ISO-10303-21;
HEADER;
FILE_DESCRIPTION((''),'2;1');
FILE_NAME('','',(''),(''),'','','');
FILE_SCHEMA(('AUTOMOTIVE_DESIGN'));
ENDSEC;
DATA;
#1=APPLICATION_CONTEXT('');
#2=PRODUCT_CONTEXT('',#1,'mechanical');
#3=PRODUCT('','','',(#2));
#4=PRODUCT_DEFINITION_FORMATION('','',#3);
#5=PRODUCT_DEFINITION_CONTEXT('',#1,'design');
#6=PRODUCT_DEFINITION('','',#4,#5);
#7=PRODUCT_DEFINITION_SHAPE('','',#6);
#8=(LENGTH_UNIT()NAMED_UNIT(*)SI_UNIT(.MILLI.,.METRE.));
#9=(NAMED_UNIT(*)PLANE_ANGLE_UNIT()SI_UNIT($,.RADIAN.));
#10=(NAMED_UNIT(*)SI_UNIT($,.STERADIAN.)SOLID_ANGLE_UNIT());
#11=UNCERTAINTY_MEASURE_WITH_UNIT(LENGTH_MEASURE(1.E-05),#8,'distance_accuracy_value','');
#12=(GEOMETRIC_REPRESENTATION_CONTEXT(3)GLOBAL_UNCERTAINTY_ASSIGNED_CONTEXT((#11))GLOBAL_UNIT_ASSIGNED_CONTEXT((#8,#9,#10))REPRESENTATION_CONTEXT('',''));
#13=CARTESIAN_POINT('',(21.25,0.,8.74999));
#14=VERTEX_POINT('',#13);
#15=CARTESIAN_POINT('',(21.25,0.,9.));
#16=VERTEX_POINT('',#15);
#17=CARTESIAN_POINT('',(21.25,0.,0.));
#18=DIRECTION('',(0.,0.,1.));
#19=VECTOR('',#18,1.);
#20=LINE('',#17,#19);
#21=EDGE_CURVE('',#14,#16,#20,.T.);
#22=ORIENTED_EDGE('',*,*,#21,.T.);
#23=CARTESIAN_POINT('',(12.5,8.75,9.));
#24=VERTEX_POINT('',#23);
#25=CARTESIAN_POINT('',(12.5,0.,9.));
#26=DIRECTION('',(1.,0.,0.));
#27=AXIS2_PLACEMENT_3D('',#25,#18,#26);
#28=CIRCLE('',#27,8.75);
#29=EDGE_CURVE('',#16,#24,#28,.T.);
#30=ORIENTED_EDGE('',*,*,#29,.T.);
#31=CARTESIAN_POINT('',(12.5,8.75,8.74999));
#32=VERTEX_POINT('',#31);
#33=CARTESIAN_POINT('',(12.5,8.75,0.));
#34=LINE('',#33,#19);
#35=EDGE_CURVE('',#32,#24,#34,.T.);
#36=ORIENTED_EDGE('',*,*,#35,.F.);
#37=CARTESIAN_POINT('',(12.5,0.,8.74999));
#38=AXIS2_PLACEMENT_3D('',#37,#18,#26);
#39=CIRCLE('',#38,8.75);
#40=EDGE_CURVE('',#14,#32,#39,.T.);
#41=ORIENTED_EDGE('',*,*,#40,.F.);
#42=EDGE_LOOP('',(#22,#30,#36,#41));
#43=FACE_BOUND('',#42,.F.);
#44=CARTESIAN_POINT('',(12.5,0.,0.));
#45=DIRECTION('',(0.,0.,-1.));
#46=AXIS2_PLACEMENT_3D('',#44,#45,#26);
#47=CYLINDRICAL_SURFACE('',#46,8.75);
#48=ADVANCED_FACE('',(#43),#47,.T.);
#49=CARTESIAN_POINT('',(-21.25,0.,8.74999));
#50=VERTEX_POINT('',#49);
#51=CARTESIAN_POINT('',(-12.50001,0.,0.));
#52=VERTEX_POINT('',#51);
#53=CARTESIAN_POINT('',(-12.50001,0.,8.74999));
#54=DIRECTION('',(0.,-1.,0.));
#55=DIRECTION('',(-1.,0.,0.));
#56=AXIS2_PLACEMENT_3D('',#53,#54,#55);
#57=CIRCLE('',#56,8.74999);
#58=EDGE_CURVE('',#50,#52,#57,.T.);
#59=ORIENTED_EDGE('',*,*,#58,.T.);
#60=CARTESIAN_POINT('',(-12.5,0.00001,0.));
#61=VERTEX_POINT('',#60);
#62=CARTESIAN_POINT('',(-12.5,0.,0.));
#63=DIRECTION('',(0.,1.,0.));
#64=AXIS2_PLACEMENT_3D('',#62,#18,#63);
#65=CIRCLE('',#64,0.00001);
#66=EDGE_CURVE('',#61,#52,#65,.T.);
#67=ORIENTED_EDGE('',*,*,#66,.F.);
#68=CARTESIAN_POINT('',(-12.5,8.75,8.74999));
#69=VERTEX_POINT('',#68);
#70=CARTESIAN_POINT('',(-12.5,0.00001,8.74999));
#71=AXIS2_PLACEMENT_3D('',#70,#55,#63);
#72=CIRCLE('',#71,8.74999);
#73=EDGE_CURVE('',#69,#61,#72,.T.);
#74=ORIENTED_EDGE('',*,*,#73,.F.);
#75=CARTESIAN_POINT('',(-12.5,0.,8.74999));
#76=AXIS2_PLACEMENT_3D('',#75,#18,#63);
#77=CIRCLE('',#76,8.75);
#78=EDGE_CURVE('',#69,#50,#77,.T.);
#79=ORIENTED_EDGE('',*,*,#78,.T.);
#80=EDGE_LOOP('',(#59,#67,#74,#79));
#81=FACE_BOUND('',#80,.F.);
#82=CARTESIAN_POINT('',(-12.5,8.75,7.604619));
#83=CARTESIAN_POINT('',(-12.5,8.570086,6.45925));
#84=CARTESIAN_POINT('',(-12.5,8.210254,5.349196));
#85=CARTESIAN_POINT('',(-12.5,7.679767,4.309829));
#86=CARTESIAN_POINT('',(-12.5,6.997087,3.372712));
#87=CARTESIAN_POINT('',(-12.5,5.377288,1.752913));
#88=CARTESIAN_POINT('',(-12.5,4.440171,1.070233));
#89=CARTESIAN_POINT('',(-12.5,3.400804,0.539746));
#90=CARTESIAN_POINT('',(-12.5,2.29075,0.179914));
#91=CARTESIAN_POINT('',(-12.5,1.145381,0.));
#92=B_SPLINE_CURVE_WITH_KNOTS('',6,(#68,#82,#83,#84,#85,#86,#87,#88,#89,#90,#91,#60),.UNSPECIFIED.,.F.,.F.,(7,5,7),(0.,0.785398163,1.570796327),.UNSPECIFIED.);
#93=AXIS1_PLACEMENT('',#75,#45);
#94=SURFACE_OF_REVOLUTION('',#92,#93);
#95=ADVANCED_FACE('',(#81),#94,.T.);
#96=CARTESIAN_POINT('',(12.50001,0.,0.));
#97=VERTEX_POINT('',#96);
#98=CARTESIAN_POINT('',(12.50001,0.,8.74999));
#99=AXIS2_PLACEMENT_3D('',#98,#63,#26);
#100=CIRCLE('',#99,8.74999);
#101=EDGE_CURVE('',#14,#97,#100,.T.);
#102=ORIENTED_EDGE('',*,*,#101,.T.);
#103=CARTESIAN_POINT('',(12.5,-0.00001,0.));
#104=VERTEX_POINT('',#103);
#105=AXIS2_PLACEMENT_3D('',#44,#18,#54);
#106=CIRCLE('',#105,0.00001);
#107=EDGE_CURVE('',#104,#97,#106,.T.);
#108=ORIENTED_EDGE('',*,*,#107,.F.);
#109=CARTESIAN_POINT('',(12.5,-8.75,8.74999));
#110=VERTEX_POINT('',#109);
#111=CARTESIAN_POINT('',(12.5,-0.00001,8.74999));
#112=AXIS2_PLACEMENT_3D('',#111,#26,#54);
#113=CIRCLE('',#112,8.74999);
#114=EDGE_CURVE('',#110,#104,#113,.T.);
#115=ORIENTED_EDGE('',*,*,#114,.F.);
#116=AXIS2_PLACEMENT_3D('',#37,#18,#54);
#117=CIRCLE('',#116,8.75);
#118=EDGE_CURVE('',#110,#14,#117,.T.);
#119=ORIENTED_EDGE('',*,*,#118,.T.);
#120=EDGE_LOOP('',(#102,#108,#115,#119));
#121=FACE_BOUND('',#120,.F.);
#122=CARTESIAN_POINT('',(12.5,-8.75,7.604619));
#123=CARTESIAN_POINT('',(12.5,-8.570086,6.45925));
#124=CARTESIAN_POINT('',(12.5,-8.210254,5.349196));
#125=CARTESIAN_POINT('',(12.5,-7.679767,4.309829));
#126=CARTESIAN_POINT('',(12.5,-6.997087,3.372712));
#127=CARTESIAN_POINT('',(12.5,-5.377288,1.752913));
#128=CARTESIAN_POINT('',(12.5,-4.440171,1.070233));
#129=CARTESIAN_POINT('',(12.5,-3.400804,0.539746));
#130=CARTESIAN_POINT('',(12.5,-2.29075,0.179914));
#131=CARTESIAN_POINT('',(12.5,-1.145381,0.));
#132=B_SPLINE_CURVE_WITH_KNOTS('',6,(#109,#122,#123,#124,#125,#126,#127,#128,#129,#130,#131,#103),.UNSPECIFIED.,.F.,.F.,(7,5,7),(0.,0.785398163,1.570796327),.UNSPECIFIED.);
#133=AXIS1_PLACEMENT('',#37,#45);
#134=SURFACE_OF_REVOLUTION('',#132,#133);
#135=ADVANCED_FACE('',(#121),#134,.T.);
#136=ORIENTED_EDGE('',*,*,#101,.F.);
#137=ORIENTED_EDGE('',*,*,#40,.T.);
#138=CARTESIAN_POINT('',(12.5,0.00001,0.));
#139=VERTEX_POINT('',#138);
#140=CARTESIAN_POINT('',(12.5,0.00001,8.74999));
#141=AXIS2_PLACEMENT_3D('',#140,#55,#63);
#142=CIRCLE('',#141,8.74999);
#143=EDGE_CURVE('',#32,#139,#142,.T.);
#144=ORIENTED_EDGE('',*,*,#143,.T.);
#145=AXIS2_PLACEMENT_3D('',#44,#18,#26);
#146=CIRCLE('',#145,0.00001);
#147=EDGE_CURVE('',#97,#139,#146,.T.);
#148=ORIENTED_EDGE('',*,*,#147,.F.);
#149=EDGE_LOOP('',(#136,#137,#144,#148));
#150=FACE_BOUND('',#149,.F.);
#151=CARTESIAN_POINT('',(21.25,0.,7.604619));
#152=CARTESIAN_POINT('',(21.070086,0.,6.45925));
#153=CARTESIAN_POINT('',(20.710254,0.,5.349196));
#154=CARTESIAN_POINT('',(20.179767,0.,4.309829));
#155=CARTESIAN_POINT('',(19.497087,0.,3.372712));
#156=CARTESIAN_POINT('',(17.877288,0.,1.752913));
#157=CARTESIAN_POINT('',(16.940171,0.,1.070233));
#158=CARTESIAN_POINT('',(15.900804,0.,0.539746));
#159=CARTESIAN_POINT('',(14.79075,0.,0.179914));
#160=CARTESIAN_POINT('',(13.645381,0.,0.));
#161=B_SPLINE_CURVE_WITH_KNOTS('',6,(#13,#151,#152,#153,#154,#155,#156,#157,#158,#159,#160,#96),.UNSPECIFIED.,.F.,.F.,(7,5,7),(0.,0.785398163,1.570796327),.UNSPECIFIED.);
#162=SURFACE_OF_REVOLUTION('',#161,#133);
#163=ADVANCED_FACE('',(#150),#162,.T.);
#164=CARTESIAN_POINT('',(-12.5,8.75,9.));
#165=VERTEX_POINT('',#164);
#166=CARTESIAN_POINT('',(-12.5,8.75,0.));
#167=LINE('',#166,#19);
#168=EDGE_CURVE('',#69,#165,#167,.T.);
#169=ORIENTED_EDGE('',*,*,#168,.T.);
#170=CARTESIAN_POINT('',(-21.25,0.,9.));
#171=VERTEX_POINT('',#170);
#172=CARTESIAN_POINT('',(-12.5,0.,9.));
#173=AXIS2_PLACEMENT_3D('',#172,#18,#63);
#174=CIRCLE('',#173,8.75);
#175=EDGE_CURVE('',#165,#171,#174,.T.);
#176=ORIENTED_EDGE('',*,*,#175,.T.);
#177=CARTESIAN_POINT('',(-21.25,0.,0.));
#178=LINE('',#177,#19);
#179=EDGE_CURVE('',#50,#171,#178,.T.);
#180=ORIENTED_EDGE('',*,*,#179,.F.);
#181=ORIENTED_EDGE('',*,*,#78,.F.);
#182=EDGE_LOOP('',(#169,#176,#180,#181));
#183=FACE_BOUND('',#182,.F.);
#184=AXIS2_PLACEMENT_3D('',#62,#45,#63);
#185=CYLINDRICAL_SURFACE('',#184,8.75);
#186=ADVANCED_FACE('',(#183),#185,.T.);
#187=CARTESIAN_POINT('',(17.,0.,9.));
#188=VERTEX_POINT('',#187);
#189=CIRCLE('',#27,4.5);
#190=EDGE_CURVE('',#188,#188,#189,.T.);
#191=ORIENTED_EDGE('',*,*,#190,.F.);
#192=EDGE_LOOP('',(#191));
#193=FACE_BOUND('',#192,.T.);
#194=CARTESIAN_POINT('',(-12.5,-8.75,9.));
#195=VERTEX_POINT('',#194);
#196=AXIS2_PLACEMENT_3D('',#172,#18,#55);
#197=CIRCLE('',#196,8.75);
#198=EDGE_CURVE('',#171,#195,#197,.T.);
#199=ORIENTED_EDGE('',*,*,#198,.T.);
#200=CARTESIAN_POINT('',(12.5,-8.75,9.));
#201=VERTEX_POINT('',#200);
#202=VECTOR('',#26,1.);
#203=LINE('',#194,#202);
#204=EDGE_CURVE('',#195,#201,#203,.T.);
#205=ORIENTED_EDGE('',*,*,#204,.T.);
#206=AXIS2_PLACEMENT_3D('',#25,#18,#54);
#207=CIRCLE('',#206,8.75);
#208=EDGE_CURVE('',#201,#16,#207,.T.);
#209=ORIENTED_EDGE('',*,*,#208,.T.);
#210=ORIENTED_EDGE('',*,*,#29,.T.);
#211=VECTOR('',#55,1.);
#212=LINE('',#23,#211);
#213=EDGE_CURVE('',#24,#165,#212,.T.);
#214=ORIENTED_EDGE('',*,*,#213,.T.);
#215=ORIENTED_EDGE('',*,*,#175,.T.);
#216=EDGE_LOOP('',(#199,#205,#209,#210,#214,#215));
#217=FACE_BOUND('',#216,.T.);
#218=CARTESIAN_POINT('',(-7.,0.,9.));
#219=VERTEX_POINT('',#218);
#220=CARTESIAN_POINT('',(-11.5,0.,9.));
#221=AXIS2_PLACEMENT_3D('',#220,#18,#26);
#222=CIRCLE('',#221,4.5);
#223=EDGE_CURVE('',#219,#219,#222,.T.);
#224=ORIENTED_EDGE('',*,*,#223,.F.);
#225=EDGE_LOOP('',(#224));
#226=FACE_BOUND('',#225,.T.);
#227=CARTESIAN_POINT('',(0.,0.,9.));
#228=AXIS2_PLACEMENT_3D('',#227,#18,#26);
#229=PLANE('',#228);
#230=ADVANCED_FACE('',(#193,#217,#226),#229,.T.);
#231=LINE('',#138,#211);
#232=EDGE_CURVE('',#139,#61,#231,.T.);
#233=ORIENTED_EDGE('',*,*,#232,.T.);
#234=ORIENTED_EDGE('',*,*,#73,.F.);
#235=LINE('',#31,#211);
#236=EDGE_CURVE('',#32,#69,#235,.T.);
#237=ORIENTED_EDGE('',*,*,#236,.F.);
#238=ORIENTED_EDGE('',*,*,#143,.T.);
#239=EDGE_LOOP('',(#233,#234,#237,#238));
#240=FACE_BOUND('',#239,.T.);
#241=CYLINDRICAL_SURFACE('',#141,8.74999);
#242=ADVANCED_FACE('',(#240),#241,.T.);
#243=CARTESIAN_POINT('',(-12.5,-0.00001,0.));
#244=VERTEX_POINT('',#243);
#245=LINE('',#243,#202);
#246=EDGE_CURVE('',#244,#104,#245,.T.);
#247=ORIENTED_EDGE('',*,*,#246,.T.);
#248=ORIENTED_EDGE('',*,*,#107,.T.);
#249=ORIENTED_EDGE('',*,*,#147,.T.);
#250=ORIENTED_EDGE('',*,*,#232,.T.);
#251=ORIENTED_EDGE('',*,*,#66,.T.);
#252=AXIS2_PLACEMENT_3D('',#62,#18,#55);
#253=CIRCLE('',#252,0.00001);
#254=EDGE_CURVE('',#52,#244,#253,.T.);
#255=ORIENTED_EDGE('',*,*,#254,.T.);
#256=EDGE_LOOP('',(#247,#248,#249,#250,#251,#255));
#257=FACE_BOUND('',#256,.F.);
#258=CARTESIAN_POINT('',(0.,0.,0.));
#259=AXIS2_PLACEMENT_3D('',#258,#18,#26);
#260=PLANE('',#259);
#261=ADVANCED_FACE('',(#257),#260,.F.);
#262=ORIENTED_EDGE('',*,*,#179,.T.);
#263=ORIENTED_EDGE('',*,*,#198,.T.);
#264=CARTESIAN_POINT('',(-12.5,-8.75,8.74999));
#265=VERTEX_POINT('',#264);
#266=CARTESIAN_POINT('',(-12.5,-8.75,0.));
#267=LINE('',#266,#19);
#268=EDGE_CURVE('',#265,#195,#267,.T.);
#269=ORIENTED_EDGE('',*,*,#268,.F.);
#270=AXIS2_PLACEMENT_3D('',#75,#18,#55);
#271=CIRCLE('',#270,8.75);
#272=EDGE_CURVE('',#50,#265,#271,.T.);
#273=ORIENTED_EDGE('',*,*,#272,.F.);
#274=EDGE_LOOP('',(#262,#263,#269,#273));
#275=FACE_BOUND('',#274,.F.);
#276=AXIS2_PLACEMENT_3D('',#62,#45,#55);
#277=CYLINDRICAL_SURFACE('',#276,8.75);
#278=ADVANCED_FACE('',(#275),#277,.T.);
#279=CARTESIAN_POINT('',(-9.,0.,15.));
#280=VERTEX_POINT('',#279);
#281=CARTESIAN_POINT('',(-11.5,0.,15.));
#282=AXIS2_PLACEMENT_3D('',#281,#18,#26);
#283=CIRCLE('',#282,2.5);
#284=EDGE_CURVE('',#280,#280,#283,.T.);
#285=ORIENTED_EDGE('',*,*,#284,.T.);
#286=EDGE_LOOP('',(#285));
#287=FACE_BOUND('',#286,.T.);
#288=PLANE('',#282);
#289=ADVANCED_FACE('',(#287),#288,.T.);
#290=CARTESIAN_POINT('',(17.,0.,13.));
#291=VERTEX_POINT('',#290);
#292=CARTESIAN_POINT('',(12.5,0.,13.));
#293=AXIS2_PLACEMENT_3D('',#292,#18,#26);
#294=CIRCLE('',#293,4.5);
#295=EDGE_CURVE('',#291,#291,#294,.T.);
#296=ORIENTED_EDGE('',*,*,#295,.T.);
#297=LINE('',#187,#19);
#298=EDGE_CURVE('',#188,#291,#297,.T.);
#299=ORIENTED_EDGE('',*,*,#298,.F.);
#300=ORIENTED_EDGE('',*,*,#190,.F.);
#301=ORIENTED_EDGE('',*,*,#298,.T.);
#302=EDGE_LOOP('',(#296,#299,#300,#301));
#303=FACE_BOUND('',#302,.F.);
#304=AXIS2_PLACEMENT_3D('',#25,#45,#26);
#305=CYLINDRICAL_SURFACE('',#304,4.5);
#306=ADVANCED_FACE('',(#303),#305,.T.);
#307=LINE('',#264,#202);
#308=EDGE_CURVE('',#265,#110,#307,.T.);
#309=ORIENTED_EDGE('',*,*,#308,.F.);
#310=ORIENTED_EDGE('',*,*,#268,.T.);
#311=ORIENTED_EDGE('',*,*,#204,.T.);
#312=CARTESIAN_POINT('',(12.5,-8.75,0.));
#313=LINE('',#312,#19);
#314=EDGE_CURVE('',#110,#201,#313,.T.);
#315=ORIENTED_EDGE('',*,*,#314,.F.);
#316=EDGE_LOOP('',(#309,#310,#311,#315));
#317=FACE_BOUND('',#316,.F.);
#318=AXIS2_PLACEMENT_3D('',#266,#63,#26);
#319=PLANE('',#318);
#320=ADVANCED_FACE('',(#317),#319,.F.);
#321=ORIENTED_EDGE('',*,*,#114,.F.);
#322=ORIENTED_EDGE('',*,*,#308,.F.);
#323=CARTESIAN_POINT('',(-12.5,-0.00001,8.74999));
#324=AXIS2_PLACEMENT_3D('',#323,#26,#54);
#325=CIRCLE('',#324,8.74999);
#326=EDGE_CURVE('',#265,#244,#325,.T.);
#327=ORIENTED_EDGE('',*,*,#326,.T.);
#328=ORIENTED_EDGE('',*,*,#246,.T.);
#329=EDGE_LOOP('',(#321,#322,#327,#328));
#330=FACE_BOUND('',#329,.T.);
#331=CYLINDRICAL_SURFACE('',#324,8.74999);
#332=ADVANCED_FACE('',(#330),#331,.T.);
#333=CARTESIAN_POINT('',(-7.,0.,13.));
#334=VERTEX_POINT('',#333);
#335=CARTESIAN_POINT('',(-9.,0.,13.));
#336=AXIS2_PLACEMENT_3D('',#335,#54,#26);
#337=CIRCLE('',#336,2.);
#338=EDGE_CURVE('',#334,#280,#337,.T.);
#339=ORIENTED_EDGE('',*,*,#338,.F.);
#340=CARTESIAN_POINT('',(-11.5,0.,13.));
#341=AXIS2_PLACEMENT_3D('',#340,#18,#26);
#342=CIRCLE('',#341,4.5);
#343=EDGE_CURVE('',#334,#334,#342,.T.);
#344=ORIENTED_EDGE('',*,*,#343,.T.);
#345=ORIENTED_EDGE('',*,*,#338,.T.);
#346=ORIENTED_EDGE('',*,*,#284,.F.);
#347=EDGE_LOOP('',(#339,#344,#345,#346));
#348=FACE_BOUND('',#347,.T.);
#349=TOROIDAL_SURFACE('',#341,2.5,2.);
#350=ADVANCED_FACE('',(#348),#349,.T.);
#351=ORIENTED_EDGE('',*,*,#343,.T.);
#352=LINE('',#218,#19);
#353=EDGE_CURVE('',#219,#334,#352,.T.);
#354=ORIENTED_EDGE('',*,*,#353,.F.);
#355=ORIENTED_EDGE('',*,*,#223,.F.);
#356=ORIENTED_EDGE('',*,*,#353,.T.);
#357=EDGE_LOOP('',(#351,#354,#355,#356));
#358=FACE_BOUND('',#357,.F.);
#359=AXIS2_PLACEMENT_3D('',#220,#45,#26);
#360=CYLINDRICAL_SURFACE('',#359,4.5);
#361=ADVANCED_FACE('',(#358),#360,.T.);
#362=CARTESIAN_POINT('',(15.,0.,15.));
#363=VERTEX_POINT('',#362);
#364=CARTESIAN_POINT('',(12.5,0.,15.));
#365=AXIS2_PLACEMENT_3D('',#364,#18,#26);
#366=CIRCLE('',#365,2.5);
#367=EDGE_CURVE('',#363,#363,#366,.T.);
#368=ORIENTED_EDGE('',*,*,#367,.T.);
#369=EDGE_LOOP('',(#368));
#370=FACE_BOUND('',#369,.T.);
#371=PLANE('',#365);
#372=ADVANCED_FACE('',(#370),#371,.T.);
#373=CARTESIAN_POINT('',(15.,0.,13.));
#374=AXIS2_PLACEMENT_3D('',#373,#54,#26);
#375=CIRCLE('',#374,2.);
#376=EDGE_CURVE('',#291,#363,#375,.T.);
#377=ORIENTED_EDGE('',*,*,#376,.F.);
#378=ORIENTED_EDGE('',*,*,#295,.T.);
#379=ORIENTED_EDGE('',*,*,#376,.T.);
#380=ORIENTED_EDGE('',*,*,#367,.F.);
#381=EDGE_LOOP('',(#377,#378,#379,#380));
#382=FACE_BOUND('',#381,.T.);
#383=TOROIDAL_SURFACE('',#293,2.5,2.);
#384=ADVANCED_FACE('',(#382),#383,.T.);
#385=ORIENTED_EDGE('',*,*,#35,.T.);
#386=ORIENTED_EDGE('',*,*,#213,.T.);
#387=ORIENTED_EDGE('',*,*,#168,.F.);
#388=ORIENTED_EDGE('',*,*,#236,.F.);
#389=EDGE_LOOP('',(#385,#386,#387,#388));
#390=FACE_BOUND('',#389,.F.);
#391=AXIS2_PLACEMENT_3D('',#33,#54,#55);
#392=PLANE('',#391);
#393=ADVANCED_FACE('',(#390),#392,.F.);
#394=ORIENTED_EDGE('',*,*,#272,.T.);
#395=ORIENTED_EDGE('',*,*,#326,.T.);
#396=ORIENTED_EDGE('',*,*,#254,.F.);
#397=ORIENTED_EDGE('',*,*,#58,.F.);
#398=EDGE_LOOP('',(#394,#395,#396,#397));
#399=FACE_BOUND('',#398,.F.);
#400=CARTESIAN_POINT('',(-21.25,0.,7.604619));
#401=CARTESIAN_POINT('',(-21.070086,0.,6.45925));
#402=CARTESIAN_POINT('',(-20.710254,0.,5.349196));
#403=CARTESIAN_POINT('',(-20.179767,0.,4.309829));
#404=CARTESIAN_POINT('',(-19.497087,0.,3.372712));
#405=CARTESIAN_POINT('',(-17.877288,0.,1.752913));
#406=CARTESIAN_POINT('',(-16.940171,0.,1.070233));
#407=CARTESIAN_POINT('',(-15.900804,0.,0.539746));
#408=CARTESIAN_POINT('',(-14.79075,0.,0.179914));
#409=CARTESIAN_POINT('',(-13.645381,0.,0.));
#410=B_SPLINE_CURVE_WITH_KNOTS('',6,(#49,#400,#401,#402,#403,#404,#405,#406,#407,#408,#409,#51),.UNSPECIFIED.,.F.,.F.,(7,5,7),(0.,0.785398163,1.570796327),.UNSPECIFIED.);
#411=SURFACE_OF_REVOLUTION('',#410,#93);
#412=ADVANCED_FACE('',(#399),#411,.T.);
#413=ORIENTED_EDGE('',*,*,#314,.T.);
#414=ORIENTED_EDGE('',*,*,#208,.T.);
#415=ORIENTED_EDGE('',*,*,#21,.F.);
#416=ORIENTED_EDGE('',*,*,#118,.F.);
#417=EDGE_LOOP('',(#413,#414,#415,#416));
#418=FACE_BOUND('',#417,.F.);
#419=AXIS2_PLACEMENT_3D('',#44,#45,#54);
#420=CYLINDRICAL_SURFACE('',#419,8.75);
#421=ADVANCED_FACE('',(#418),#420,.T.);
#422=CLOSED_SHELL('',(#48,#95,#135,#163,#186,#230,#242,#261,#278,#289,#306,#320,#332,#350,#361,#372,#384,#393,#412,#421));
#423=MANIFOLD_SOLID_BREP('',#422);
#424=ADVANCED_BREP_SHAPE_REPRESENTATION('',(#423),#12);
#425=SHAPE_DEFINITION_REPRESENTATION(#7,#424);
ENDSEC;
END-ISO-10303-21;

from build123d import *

# Parameters (mm, degrees)
F1_DEPTH = 9
F2_R     = 8.74999
F3_R     = 4.5
F4_DEPTH = 6
F5_R     = 2


# Not quite as in the source:
# - a fillet or chamfer is up to 0.001 mm smaller than in the source, because OpenCascade refuses the exact size


with BuildPart() as f1:
    # F0 (on Top) → F1 (new body)
    with BuildSketch(Plane.XY):
        with BuildLine():
            Line((12.5, 8.75), (-12.5, 8.75))
            ThreePointArc((-12.5, 8.75), (-18.6871843354, 6.1871843354), (-21.25, 0))
            ThreePointArc((-21.25, 0), (-18.6871843354, -6.1871843354), (-12.5, -8.75))
            Line((-12.5, -8.75), (12.5, -8.75))
            ThreePointArc((12.5, -8.75), (18.6871843354, -6.1871843354), (21.25, 0))
            ThreePointArc((21.25, 0), (18.6871843354, 6.1871843354), (12.5, 8.75))
        make_face()
    extrude(amount=F1_DEPTH)

    # F2 (radius 8.75 in the source; OpenCascade refuses exactly that, so slightly less here)
    f2_edges = [f1.edges().sort_by_distance(p)[0] for p in [
        (21.25, 0, 0),
        (-21.25, 0, 0),
        (0, -8.75, 0),
        (0, 8.75, 0),
    ]]
    fillet(f2_edges, radius=F2_R)

    # F3 (on face) → F4 (join)
    with BuildSketch(Plane.XY.offset(9)):
        with Locations((12.5, 0)):
            Circle(F3_R)
        with Locations((-11.5, 0)):
            Circle(F3_R)
    extrude(amount=F4_DEPTH)

    # F5
    f5_edges = [f1.edges().sort_by_distance(p)[0] for p in [
        (-16, 0, 15),
        (8, 0, 15),
    ]]
    fillet(f5_edges, radius=F5_R)


solid = f1.part
